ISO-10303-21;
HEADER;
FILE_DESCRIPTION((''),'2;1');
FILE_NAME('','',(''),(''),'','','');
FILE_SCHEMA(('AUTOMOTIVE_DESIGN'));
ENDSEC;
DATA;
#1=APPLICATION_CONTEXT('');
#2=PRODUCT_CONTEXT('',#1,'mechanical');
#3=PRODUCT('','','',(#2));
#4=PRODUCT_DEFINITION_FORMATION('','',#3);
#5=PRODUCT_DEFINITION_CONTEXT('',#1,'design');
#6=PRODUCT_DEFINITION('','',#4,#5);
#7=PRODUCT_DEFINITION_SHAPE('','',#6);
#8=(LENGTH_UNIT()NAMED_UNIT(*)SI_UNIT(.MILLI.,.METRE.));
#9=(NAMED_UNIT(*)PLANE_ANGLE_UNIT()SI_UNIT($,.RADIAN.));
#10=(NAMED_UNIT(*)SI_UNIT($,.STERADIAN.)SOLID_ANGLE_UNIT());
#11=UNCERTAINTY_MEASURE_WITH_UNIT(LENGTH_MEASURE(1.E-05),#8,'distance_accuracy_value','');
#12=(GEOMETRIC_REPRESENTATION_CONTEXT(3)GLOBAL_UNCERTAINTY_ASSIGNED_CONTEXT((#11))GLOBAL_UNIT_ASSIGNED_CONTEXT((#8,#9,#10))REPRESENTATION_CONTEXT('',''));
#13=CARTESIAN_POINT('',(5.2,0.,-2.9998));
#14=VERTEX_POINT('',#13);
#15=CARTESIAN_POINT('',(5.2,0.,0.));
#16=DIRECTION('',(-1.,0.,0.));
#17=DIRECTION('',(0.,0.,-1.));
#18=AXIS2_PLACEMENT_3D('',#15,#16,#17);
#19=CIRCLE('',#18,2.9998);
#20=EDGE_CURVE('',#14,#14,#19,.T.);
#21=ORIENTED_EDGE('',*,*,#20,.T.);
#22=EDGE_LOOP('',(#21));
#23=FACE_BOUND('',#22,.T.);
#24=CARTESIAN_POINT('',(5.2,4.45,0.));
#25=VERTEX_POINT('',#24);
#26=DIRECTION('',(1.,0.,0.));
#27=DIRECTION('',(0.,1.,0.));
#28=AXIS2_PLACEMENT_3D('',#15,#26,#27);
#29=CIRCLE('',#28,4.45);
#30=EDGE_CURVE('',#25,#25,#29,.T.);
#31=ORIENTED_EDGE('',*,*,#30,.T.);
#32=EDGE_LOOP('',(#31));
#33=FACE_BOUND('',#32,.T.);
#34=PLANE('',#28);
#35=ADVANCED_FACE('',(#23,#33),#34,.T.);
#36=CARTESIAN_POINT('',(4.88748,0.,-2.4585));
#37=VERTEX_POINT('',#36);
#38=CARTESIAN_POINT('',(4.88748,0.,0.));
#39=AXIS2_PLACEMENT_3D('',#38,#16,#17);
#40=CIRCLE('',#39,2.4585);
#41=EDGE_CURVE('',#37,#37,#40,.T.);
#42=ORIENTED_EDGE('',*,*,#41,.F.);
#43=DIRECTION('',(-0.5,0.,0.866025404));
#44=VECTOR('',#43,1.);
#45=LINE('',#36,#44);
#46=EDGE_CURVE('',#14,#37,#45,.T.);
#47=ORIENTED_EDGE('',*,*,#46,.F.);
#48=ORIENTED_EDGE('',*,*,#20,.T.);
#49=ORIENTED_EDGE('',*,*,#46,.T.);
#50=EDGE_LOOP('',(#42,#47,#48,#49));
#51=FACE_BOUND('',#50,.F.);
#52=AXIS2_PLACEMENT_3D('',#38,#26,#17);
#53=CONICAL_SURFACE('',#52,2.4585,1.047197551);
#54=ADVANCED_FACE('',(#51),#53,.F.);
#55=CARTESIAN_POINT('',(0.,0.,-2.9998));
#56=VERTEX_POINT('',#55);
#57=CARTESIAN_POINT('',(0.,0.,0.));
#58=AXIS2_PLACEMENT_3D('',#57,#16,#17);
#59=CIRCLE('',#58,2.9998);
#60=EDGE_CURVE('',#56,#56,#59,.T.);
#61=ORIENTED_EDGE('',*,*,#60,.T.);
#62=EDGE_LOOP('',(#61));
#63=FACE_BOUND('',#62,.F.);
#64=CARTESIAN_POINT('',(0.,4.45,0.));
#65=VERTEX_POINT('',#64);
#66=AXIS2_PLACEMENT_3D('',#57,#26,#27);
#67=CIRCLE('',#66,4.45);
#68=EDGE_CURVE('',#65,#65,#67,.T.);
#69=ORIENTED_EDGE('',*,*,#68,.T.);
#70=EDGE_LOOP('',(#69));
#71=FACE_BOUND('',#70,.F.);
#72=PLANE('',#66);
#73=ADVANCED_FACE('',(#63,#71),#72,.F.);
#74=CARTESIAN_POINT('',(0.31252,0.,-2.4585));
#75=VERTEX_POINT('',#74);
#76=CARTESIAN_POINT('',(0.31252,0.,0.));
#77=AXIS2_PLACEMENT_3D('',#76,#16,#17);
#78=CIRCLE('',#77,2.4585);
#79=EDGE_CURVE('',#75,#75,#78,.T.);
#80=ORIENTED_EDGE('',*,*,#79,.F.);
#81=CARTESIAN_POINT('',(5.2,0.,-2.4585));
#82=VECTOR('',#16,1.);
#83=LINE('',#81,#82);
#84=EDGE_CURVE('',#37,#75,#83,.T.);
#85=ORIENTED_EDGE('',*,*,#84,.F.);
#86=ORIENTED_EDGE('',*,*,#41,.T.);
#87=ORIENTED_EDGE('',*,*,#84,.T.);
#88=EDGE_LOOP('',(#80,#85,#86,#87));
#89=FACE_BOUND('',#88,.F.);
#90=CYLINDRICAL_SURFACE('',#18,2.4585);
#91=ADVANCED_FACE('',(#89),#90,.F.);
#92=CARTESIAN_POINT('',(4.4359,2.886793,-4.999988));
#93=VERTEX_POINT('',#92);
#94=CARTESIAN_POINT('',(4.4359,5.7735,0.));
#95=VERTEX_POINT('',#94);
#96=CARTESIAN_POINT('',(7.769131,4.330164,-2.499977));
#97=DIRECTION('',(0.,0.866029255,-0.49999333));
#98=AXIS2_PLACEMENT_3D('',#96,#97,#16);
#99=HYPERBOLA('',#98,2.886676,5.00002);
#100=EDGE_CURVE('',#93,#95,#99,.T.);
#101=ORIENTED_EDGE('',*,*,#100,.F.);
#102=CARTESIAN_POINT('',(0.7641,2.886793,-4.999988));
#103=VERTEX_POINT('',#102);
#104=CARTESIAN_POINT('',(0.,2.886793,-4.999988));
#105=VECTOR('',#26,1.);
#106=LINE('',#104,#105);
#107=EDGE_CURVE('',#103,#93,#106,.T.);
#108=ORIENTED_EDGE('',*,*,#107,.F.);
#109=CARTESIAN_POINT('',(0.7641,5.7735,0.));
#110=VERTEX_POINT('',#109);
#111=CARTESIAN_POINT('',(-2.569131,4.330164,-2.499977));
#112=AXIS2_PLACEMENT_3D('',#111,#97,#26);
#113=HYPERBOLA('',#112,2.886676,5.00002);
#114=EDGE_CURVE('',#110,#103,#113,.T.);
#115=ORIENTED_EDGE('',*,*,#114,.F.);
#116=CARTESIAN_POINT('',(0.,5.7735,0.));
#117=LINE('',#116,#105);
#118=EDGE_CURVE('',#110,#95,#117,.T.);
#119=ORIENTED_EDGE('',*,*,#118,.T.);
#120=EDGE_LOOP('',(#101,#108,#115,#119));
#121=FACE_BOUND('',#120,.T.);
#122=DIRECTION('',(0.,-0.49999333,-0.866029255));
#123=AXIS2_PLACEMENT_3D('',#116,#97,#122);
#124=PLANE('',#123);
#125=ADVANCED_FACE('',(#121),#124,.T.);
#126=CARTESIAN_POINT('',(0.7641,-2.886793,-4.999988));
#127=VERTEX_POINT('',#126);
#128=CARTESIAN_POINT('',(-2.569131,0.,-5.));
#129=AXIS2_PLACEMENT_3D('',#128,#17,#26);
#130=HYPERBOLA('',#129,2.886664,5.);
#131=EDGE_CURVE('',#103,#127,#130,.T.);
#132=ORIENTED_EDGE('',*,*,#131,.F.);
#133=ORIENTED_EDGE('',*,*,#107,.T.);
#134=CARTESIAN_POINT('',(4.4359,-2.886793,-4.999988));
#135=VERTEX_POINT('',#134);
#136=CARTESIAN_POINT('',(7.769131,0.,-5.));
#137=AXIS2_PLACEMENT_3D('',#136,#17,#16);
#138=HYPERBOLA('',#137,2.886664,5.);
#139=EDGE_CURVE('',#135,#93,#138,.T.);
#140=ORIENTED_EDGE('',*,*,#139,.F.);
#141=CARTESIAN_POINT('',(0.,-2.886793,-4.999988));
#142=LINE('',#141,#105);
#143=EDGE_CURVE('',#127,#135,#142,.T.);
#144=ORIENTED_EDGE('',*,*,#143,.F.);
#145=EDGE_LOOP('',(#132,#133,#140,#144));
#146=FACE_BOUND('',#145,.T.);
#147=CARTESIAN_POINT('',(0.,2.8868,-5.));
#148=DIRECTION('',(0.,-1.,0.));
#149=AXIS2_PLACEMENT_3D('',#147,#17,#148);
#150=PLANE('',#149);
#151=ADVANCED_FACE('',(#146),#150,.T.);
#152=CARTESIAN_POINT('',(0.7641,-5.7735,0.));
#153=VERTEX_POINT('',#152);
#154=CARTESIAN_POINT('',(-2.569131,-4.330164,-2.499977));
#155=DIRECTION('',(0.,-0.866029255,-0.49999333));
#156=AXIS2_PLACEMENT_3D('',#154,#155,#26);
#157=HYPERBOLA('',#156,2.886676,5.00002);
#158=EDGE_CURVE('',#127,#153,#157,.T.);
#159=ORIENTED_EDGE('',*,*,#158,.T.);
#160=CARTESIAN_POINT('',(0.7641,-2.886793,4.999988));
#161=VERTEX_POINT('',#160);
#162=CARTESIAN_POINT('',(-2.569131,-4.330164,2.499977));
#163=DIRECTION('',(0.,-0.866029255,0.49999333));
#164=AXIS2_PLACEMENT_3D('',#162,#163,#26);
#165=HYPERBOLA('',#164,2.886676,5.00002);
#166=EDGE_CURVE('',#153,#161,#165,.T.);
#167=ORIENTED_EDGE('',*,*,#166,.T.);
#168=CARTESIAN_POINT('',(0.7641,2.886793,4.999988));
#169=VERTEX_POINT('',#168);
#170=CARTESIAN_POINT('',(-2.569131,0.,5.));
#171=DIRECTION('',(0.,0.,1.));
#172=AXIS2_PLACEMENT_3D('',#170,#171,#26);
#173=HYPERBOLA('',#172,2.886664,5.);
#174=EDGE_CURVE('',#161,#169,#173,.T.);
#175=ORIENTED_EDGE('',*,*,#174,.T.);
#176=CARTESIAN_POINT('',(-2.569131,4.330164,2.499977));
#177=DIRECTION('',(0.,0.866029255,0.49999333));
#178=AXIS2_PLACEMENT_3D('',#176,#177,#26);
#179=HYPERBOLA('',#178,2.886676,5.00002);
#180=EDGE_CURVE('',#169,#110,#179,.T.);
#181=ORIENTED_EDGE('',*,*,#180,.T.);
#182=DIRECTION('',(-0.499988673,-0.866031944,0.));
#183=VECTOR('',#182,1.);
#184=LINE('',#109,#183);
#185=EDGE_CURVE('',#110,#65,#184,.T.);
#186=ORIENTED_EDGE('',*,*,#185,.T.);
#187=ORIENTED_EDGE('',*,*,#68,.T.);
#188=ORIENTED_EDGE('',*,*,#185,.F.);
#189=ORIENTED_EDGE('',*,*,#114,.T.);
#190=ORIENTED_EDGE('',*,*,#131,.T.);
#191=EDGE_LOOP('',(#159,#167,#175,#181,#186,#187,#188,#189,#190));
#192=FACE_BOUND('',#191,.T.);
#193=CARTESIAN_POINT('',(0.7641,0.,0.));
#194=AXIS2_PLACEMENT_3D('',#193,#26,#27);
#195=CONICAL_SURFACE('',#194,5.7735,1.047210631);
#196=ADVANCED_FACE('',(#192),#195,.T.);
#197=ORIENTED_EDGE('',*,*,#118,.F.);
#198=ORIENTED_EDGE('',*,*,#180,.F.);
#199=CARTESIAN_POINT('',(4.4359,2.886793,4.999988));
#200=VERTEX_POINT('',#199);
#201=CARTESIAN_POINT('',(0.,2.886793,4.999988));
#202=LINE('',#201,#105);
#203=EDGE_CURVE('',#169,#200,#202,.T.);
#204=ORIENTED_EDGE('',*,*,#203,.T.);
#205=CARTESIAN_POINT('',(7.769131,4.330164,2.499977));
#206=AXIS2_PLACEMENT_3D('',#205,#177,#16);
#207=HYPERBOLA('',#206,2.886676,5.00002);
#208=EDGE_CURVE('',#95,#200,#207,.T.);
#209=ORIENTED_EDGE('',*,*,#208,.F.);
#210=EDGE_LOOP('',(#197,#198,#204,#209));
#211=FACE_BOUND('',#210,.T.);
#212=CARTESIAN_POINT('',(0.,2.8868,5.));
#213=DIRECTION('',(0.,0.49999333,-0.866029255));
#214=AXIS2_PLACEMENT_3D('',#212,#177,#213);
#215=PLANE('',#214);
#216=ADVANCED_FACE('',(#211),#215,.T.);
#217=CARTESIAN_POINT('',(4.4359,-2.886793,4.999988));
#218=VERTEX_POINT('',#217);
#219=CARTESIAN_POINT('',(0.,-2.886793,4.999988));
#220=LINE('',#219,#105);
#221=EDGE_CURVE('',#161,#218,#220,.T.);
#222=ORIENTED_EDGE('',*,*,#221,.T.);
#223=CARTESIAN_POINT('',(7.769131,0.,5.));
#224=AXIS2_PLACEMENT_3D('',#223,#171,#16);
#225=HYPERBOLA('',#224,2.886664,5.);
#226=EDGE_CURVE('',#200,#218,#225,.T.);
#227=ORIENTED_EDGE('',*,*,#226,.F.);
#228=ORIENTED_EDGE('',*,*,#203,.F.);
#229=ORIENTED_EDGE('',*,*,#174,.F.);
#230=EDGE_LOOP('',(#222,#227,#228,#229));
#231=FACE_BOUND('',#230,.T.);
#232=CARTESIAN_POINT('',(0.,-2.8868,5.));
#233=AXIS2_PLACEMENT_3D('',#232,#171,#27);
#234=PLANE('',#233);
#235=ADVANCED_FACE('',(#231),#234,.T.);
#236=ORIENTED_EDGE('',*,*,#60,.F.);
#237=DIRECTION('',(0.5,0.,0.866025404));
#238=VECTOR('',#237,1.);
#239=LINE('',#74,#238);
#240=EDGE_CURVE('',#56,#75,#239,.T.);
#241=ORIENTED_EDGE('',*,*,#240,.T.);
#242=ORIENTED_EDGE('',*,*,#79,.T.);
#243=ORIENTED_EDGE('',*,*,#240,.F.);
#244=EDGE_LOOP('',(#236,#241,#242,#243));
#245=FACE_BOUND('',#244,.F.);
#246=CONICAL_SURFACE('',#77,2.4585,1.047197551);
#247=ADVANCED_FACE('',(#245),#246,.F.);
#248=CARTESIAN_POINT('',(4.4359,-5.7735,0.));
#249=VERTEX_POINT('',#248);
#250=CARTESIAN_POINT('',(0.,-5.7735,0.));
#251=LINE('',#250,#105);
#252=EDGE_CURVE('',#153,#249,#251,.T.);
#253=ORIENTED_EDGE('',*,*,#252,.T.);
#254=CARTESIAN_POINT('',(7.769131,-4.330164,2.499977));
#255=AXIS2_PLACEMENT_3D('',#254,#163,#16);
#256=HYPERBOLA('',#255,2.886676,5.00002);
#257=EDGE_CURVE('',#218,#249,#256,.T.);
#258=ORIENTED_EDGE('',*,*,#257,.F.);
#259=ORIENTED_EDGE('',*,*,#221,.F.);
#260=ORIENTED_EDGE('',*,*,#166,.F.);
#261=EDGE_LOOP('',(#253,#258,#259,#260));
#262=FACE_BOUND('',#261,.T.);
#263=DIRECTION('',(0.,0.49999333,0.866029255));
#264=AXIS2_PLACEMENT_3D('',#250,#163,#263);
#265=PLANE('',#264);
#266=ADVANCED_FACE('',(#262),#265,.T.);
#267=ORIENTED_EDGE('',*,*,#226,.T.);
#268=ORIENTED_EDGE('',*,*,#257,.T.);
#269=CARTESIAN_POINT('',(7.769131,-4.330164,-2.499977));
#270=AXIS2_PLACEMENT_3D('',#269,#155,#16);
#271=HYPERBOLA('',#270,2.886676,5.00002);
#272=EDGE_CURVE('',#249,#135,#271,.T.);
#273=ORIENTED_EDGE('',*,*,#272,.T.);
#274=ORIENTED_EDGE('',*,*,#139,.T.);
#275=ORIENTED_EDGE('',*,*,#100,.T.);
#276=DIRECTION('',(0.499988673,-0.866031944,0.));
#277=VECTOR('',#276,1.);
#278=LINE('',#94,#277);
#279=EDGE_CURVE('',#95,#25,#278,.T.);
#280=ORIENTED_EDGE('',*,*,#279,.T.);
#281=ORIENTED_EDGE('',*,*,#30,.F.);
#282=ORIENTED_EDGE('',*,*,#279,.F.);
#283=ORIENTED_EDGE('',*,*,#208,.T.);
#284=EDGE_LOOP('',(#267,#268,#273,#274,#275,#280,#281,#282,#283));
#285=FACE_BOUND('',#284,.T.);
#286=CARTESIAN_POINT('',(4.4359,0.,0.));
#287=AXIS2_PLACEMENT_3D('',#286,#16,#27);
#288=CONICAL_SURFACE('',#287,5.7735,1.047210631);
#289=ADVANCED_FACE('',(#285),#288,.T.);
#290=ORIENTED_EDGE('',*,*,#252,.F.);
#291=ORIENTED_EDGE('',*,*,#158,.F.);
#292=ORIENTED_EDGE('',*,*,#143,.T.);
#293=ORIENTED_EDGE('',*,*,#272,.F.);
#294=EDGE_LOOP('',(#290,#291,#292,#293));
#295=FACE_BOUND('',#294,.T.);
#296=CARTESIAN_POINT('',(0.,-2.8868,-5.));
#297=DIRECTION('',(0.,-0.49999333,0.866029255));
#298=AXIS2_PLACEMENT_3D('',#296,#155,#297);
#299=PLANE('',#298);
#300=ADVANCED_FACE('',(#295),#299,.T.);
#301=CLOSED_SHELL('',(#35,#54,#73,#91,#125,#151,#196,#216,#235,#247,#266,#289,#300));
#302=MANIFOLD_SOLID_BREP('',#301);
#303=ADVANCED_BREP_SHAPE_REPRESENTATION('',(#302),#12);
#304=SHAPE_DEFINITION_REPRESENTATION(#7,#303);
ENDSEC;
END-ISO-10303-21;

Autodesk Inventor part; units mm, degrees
ref_plane "YZ Plane" through (0, 0, 0) normal (1, 0, 0) x (0, 1, 0)
ref_plane "XZ Plane" through (0, 0, 0) normal (0, 1, 0) x (-1, 0, 0)
sketch "Szkic1" plane through (0, 0, 0) normal (1, 0, 0) x (0, 1, 0)
  line L0 (-5.7735, 0) -> (-2.8868, 5)
  line L1 (-2.8868, 5) -> (2.8868, 5)
  line L2 (2.8868, 5) -> (5.7735, 0)
  line L3 (5.7735, 0) -> (2.8868, -5)
  line L4 (2.8868, -5) -> (-2.8868, -5)
  line L5 (-2.8868, -5) -> (-5.7735, 0)
  point P0 (0, 0)
  point P1 (0, 0)
  dimension "d0" = 11.547
extrude "Bryła" add sketch "Szkic1" along normal blind 5.2
sketch "Szkic2" plane through (0, 0, 0) normal (0, 0, 1) x (1, 0, 0)
  line L0 (0, 2.8868) -> (0, 5.7735) projected
  line L1 (0, 5.7735) -> (5.2, 5.7735) projected
  line L2 (5.2, 2.8868) -> (5.2, 5.7735) projected
  line L3 (-1.04, 0) -> (6.24, 0) projected
  line L4 (0.7641, 5.7735) -> (0, 4.45)
  line L5 (4.4359, 5.7735) -> (5.2, 4.45)
  dimension "d3" = 30
  dimension "d4" = 30
  dimension "d5" = 8.9
  dimension "d6" = 8.9
revolve "Faza1" cut sketch "Szkic2" angle 360 about axis through (-10, 0, 0) along (1, 0, 0)
sketch "Szkic3" plane through (5.2, 0, 0) normal (1, 0, 0) x (0, 0, -1)
  arc A0 (-0.625, -1.0825) -> (0.625, -1.0825) centre (0, 0) ccw projected
hole "Gwint" at (5.2, 0, 0) direction (-1, 0, 0) diameter 4.917 end through all thread size "M6x1" class "6H" standard "ISO Metric profile"
chamfer "Faza2" distance 0.5413 angle 30 1 edges at (5.2, 0, 2.4585) measured on face at (5.2, 3.7371, -0.4538)
chamfer "Faza3" distance 0.5413 angle 30 1 edges at (0, 0, 2.4585) measured on face at (0, 3.7371, -0.4538)
ref_plane "Work Plane1" through (-10.9812, 0, 0) normal (0, -0.8660254, -0.5) x (1, 0, 0)
equation "\"d0\" = 1.1547 * SW"
equation "\"d1\" = KOH"
equation "\"d3\" = ANG1"
equation "\"d4\" = ANG2"
equation "\"d5\" = SW0"
equation "\"d6\" = SW01"
equation "\"d8\" = -0.5 * GD1 + 0.5 * NND"
equation "\"d40\" = -0.5 * GD1 + 0.5 * NND"
equation "\"d10\" = -0.5 * GD1 + 0.5 * NND"
equation "\"d41\" = -0.5 * GD1 + 0.5 * NND"
equation "\"ANG1\" = 30deg"
equation "\"ANG2\" = 30deg"
equation "\"NND\" = 6"
equation "\"KOH\" = 5.2"
equation "\"SW0\" = 8.9"
equation "\"SW01\" = SW0"
equation "\"GUL\" = 0.541266 * PTC"
equation "\"THREADDIA\" = 6"
equation "\"TOA\" = 30deg"
equation "\"PTC\" = 1"
equation "\"E0\" = 1.155 * SW"
equation "\"GAL\" = 0.541266 * PTC"
equation "\"SW\" = 10"
equation "\"GD1\" = 4.917468"
properties part number "ISO 4032 - M6(4)" material "Stal nierdzewna 440C"
